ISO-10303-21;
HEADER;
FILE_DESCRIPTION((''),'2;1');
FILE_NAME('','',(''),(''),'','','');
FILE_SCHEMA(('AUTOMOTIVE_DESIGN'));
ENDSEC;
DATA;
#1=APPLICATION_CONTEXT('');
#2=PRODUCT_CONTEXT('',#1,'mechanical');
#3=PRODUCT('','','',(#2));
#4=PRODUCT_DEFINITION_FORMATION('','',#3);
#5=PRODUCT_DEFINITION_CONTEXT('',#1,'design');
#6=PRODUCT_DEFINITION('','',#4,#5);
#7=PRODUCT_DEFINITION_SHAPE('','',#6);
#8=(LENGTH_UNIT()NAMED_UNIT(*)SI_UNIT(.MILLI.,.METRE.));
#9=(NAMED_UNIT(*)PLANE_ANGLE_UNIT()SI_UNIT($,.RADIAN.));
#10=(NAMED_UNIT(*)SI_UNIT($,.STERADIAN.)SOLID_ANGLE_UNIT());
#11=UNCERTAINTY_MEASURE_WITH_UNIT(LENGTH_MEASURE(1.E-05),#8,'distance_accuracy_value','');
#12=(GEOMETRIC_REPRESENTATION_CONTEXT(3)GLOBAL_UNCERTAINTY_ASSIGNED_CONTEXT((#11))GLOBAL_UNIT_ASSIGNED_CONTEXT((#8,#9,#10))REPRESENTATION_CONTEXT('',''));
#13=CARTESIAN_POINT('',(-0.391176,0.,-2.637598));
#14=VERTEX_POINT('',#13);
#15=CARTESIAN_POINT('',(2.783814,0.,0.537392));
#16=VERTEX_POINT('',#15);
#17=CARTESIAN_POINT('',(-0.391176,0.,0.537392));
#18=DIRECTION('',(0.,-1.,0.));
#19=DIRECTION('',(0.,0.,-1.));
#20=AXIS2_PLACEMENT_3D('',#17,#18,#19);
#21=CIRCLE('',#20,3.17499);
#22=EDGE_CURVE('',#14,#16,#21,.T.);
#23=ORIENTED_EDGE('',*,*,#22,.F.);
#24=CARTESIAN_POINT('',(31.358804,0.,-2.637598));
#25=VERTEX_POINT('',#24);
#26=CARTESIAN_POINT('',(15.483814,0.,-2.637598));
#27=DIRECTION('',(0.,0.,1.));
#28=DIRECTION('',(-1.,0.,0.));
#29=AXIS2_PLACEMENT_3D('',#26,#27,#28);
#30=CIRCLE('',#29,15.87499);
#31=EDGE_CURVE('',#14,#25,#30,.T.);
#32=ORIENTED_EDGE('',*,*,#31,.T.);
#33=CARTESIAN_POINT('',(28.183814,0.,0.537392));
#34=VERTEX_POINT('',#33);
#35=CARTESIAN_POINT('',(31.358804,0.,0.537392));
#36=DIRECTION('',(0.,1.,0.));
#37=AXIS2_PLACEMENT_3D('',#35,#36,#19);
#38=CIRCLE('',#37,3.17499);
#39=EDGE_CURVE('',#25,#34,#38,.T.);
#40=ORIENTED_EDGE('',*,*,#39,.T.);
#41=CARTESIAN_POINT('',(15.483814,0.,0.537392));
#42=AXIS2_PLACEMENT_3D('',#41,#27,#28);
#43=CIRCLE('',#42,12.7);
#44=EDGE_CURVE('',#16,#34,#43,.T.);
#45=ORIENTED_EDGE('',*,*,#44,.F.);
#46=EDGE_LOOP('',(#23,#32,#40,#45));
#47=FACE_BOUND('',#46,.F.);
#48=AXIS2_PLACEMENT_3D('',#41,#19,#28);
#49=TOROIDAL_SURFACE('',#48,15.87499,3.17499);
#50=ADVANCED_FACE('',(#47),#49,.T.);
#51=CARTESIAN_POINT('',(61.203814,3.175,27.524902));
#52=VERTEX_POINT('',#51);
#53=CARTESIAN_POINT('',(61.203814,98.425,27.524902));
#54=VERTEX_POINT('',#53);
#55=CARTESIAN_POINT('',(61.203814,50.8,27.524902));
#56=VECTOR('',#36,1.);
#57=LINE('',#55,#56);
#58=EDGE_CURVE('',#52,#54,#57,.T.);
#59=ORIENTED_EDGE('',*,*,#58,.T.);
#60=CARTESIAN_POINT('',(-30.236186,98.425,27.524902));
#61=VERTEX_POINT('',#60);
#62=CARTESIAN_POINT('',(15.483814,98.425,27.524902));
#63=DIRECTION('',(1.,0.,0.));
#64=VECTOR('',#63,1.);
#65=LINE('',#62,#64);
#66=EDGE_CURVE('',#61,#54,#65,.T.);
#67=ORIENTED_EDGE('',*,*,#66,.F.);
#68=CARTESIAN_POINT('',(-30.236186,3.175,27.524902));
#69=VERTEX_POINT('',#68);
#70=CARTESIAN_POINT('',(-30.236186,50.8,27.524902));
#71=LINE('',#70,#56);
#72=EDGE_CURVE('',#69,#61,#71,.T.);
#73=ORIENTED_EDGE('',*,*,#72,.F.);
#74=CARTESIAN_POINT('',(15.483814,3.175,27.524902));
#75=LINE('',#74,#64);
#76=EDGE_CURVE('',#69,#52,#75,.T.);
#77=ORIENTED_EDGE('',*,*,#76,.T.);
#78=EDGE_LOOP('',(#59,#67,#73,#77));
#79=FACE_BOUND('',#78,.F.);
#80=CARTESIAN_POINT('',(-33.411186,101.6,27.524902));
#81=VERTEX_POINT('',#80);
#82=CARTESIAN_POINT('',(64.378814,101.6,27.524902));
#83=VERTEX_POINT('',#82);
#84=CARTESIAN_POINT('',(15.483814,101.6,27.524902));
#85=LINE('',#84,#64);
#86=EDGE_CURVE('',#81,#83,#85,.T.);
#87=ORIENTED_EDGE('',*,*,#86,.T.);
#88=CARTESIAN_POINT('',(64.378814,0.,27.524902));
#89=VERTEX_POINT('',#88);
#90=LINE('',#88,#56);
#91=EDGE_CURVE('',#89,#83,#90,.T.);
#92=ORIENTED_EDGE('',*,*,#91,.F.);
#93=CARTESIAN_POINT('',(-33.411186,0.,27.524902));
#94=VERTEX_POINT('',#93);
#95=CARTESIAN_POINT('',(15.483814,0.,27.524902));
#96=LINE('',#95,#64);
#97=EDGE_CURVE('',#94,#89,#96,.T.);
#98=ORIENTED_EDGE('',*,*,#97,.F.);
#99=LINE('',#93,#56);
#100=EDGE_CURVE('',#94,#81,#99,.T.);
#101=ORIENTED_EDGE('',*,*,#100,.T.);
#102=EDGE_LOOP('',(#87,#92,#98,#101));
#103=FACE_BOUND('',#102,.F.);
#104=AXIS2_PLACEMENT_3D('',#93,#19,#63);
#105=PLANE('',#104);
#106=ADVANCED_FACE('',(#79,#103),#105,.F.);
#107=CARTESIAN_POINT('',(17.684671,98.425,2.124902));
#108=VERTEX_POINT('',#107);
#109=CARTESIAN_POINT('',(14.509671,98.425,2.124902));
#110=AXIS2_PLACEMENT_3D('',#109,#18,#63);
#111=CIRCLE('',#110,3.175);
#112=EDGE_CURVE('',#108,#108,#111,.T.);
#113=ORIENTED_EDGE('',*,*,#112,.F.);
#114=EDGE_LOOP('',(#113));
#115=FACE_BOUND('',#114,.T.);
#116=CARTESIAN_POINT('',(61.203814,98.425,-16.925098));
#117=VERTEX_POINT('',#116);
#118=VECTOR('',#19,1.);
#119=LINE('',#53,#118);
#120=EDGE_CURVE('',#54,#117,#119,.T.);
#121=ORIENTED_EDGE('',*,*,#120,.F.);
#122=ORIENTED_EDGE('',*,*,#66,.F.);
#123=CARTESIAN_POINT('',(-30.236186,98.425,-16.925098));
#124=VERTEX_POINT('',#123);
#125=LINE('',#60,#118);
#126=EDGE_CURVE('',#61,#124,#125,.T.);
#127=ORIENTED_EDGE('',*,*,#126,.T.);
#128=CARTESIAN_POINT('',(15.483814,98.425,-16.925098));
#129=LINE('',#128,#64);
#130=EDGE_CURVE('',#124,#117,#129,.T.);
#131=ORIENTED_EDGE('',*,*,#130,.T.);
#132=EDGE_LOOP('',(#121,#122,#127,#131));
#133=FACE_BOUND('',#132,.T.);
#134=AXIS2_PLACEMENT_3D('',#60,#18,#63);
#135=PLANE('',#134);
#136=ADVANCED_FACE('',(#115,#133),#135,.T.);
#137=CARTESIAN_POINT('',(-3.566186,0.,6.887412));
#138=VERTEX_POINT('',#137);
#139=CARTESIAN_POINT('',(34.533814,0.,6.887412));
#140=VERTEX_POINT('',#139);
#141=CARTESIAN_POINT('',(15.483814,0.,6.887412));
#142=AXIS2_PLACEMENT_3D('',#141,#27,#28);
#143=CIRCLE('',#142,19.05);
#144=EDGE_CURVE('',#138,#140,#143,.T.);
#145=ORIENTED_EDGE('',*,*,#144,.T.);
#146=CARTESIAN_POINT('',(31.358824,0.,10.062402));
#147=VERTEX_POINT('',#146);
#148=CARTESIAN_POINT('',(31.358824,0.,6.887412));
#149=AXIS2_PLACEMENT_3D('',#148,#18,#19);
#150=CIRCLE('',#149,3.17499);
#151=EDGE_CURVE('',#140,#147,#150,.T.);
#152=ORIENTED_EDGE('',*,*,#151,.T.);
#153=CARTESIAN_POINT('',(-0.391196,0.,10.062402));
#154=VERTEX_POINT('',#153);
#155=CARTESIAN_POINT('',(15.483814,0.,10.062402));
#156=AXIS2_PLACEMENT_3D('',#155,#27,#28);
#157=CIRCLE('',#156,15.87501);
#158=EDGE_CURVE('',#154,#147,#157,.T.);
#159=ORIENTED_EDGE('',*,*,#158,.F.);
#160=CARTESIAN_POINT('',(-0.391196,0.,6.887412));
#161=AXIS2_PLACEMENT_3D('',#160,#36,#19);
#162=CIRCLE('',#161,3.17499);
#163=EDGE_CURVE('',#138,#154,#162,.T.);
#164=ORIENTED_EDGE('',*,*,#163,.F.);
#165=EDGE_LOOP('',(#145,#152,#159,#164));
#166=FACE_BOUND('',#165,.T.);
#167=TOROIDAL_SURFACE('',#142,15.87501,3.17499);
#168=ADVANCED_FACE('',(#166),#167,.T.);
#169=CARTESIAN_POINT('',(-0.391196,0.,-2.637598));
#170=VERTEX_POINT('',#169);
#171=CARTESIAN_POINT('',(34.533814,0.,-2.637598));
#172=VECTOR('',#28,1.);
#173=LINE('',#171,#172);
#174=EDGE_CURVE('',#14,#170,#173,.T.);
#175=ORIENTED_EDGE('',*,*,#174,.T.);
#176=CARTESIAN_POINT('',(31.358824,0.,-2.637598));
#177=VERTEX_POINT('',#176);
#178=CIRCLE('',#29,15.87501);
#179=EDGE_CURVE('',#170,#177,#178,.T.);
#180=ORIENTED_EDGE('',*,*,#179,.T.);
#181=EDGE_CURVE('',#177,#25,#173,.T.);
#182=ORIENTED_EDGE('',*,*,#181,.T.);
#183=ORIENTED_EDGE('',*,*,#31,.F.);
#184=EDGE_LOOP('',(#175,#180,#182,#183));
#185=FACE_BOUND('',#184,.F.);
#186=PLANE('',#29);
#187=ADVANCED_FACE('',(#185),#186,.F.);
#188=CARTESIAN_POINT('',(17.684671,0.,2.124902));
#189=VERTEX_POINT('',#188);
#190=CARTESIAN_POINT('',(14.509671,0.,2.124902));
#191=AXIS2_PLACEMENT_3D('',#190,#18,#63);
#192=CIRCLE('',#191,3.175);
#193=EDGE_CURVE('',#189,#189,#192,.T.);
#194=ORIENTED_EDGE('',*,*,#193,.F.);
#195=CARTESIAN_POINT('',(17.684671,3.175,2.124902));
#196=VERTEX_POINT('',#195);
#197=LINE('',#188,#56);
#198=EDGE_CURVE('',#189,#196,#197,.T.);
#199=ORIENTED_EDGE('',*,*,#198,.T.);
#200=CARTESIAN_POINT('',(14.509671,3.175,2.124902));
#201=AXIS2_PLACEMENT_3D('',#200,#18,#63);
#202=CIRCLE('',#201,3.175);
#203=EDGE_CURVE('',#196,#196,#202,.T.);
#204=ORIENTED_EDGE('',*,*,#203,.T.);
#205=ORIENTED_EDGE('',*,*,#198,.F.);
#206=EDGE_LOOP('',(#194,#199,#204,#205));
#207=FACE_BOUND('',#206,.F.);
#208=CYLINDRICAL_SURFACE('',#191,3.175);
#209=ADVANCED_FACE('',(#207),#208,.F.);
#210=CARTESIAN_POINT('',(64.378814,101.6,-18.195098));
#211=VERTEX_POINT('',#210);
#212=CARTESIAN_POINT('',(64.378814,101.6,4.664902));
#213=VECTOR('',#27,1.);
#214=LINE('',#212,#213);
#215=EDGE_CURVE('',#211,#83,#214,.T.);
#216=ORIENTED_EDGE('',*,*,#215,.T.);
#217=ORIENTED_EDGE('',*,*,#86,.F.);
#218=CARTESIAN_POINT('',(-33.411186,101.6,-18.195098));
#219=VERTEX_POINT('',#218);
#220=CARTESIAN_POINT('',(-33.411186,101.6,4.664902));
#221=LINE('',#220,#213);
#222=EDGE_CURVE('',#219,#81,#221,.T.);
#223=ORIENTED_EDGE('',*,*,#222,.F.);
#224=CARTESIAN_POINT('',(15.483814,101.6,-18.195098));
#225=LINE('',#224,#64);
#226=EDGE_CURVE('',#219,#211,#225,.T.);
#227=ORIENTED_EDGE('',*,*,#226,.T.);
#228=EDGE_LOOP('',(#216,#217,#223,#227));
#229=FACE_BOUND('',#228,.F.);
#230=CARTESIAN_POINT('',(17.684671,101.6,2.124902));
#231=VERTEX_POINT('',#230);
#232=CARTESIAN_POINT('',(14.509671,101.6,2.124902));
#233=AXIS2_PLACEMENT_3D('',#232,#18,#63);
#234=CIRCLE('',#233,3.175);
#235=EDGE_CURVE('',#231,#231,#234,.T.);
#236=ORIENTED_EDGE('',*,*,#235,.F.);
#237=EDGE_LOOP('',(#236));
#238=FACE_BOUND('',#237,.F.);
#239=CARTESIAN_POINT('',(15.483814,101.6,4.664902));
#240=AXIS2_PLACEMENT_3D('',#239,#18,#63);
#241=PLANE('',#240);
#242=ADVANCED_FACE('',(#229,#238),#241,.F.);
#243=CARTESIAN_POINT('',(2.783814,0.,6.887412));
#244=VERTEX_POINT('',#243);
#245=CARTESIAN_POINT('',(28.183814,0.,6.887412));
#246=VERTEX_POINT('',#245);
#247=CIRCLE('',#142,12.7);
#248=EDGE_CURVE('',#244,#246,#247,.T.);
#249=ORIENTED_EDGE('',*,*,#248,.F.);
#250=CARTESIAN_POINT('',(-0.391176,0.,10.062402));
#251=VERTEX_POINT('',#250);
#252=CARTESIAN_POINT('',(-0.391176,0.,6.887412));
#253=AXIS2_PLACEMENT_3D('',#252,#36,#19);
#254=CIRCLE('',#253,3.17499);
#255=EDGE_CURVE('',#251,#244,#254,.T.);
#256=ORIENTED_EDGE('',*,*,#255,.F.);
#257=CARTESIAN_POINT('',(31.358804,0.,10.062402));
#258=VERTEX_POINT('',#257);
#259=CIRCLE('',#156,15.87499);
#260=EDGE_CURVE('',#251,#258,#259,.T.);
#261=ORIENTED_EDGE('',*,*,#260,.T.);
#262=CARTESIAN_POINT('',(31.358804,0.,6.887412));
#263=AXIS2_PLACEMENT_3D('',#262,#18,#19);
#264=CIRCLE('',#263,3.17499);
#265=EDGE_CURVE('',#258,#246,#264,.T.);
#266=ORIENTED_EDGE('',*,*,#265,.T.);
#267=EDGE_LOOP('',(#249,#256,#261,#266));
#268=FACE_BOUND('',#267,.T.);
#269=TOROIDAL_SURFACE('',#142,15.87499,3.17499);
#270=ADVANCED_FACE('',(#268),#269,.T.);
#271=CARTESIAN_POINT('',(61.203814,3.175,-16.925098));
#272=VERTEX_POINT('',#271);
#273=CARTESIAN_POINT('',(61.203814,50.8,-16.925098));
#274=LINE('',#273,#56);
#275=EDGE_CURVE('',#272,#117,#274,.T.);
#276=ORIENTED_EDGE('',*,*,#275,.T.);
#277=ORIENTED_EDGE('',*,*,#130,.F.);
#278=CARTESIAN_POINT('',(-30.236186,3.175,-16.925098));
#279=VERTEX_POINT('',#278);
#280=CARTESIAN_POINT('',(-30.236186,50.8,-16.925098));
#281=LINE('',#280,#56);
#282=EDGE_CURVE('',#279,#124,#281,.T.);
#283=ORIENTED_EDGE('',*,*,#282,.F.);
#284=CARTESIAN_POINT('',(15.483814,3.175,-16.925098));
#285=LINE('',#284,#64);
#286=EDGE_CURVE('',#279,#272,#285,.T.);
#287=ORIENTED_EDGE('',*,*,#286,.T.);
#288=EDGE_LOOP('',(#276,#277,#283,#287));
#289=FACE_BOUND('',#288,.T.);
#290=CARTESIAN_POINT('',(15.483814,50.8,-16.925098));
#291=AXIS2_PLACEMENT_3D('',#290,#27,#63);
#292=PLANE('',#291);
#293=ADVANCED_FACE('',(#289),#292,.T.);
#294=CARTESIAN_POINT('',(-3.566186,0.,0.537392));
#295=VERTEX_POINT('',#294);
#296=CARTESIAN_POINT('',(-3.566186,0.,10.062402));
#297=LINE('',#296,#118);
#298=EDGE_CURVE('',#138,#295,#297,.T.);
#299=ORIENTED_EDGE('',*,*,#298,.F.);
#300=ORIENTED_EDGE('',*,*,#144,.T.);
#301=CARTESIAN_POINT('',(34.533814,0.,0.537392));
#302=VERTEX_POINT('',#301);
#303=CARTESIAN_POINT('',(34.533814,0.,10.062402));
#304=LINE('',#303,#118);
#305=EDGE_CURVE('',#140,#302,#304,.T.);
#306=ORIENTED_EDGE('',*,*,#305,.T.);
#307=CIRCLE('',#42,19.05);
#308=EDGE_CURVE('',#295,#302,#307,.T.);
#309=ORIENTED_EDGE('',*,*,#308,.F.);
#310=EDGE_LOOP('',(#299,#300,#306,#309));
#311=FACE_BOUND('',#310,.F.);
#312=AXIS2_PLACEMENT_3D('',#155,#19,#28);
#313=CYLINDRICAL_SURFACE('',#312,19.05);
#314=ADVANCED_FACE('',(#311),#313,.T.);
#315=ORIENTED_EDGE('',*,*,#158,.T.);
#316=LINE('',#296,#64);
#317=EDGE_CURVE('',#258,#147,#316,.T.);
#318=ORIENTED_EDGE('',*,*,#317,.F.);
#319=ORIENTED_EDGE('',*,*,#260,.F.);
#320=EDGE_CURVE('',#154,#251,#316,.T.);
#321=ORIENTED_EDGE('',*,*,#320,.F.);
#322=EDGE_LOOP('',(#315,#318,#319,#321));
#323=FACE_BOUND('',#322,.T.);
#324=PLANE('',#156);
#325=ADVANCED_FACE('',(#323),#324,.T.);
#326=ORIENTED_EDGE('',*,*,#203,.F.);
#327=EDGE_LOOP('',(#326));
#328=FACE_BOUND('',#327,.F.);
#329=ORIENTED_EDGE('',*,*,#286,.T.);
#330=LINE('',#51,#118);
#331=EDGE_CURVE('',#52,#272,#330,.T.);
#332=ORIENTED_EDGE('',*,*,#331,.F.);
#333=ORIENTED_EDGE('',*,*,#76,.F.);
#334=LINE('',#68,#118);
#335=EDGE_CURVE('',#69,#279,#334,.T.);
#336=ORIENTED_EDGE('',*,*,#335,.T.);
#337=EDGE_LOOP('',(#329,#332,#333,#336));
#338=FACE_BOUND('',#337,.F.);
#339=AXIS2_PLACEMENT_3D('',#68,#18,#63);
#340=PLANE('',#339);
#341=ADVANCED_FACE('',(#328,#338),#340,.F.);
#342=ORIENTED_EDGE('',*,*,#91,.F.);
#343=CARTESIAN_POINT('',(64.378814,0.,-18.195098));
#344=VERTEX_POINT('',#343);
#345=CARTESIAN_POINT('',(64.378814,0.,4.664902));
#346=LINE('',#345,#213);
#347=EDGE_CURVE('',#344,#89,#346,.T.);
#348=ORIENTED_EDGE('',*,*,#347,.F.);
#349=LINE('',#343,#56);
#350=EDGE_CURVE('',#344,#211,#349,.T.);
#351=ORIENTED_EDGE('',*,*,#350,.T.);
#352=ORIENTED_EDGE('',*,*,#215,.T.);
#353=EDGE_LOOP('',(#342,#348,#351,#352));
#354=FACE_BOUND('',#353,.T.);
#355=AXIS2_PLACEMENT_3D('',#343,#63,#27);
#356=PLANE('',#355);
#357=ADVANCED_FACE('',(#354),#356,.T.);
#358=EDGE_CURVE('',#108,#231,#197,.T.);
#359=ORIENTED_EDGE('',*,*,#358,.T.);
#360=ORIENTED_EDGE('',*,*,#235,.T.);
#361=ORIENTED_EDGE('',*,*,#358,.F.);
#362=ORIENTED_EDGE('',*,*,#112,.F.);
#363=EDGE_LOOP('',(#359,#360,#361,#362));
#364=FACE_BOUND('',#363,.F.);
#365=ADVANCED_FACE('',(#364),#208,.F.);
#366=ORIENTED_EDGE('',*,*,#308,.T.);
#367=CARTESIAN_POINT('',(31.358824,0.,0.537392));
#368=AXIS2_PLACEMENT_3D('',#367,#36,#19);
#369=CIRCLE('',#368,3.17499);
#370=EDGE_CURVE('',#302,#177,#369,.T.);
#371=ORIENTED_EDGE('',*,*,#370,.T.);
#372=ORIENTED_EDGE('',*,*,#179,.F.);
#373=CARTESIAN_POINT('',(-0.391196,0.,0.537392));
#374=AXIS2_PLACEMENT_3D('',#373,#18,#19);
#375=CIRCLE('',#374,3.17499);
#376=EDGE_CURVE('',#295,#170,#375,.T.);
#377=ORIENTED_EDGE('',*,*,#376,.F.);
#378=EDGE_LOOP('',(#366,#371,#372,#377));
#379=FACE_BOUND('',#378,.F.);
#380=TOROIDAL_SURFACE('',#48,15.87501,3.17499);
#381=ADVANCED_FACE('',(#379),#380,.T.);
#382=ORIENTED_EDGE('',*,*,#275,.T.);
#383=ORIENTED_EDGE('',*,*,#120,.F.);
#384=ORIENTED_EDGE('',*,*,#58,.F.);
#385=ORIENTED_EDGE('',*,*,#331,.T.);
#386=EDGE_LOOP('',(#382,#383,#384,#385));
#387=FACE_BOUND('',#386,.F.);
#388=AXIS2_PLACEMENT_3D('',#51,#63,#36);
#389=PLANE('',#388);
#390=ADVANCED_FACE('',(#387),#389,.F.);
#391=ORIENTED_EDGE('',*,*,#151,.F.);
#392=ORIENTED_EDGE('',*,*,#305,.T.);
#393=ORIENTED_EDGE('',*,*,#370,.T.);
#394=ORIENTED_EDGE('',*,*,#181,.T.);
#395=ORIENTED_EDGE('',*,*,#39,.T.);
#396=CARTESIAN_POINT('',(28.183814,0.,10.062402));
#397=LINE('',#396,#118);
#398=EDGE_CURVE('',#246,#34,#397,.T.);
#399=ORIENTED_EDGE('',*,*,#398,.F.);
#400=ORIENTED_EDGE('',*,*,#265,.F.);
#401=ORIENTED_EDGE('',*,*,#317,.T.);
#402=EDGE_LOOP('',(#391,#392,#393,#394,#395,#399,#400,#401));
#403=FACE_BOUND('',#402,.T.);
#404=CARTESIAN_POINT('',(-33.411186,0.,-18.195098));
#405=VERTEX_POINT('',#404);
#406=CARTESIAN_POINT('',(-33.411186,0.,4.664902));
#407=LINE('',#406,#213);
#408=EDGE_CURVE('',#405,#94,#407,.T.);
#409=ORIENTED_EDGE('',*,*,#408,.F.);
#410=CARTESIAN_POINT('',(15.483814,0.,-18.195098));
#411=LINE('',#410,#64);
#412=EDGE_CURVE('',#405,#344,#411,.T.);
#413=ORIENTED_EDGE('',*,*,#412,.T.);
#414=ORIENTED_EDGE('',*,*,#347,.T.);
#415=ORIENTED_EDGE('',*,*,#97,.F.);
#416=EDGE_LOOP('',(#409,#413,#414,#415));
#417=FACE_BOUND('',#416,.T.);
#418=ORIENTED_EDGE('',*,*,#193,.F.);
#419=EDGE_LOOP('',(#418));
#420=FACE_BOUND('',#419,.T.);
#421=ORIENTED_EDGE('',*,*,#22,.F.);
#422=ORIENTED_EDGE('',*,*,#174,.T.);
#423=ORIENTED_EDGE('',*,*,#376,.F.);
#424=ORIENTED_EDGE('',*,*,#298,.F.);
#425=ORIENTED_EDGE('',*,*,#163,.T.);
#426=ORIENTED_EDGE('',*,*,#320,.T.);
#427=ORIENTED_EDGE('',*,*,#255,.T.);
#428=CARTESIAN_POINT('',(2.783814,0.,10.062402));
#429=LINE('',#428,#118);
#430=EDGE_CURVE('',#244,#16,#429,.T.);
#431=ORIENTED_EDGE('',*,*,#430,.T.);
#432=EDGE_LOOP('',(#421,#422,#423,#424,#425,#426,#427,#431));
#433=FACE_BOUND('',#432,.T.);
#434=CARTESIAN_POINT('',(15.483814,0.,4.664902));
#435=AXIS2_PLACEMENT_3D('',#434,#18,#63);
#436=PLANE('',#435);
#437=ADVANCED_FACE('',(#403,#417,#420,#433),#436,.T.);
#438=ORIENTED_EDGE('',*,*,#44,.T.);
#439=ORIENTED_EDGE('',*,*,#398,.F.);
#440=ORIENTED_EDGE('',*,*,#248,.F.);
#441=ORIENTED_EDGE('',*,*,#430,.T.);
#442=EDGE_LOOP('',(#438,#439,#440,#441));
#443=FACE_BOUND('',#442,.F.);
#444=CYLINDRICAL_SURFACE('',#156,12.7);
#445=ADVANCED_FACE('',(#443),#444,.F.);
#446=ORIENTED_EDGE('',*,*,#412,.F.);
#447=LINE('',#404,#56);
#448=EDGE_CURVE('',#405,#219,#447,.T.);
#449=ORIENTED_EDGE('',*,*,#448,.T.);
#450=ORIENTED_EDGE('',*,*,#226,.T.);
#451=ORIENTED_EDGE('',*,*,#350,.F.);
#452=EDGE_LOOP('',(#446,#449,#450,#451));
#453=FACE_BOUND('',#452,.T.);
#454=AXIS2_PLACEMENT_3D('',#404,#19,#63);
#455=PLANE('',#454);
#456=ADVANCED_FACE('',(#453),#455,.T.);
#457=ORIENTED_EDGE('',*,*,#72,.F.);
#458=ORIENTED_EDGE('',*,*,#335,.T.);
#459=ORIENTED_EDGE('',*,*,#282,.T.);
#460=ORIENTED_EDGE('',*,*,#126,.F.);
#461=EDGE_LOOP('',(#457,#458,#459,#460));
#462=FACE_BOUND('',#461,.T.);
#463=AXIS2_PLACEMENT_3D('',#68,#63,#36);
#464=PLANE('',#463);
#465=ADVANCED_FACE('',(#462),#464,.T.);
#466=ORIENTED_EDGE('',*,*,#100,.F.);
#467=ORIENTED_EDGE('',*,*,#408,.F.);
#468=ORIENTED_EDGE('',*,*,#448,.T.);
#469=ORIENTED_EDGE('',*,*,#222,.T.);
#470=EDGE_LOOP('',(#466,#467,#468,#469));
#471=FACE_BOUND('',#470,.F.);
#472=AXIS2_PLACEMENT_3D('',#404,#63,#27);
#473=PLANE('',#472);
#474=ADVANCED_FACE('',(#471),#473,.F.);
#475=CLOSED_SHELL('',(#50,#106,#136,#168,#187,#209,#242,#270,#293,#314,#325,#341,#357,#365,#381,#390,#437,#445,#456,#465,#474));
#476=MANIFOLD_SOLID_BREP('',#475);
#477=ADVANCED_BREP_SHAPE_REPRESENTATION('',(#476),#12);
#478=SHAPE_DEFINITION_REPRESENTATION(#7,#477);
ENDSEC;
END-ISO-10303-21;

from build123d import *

# Parameters (mm, degrees)
F0_W      = 97.79
F0_H      = 45.72
F1_DEPTH  = 101.6
F2_W      = 91.44
F2_H      = 95.25
F3_DEPTH  = 44.45
F4_W      = 19.05
F4_H      = 6.35
F5_ANGLE  = 180
F7_DEPTH  = 25.4
F8_R      = 3.17499
F10_D     = 6.35
F10_DEPTH = 101.601


# Not quite as in the source:
# - a fillet or chamfer is up to 0.001 mm smaller than in the source, because OpenCascade refuses the exact size


with BuildPart() as f1:
    # F0 (on Front) → F1 (new body)
    with BuildSketch(Plane.XZ):
        with Locations((15.4838143581, 4.6649015626)):
            Rectangle(F0_W, F0_H)
    extrude(amount=-F1_DEPTH)

    # F2 (on face) → F3 (cut)
    with BuildSketch(Plane.XY.offset(27.5249015626)):
        with Locations((15.4838143581, 50.8)):
            Rectangle(F2_W, F2_H)
    extrude(amount=-F3_DEPTH, mode=Mode.SUBTRACT)

    # F4 (on face) → F5 (revolve)
    with BuildSketch(Plane.XZ):
        with Locations((5.9588143581, 6.8874015626)):
            Rectangle(F4_W, F4_H)
        with Locations((5.9588143581, 0.5374015626)):
            Rectangle(F4_W, F4_H)
    revolve(axis=Axis((15.4838143581, 0, 3.7124015626), (0, 0, 1)), revolution_arc=F5_ANGLE)

    # F6 (on face) → F7 (cut)
    with BuildSketch(Plane.XY.offset(10.0624015626)):
        with BuildLine():
            Line((28.1838143581, 0), (2.7838143581, 0))
            ThreePointArc((2.7838143581, 0), (15.4838143581, -12.7), (28.1838143581, 0))
        make_face()
    extrude(amount=-F7_DEPTH, mode=Mode.SUBTRACT)

    # F8 (radius 3.175 in the source; OpenCascade refuses exactly that, so slightly less here)
    f8_edges = [f1.edges().sort_by_distance(p)[0] for p in [
        (15.483814, -19.05, 10.062402),
        (15.483814, -12.7, 10.062402),
        (15.483814, -19.05, -2.637598),
        (15.483814, -12.7, -2.637598),
    ]]
    fillet(f8_edges, radius=F8_R)

    # F10 (through all, one way)
    with BuildSketch(Plane.XZ):
        with Locations((14.5096713677, 2.1249015626)):
            Circle(F10_D / 2)
    extrude(amount=-F10_DEPTH, mode=Mode.SUBTRACT)


solid = f1.part
